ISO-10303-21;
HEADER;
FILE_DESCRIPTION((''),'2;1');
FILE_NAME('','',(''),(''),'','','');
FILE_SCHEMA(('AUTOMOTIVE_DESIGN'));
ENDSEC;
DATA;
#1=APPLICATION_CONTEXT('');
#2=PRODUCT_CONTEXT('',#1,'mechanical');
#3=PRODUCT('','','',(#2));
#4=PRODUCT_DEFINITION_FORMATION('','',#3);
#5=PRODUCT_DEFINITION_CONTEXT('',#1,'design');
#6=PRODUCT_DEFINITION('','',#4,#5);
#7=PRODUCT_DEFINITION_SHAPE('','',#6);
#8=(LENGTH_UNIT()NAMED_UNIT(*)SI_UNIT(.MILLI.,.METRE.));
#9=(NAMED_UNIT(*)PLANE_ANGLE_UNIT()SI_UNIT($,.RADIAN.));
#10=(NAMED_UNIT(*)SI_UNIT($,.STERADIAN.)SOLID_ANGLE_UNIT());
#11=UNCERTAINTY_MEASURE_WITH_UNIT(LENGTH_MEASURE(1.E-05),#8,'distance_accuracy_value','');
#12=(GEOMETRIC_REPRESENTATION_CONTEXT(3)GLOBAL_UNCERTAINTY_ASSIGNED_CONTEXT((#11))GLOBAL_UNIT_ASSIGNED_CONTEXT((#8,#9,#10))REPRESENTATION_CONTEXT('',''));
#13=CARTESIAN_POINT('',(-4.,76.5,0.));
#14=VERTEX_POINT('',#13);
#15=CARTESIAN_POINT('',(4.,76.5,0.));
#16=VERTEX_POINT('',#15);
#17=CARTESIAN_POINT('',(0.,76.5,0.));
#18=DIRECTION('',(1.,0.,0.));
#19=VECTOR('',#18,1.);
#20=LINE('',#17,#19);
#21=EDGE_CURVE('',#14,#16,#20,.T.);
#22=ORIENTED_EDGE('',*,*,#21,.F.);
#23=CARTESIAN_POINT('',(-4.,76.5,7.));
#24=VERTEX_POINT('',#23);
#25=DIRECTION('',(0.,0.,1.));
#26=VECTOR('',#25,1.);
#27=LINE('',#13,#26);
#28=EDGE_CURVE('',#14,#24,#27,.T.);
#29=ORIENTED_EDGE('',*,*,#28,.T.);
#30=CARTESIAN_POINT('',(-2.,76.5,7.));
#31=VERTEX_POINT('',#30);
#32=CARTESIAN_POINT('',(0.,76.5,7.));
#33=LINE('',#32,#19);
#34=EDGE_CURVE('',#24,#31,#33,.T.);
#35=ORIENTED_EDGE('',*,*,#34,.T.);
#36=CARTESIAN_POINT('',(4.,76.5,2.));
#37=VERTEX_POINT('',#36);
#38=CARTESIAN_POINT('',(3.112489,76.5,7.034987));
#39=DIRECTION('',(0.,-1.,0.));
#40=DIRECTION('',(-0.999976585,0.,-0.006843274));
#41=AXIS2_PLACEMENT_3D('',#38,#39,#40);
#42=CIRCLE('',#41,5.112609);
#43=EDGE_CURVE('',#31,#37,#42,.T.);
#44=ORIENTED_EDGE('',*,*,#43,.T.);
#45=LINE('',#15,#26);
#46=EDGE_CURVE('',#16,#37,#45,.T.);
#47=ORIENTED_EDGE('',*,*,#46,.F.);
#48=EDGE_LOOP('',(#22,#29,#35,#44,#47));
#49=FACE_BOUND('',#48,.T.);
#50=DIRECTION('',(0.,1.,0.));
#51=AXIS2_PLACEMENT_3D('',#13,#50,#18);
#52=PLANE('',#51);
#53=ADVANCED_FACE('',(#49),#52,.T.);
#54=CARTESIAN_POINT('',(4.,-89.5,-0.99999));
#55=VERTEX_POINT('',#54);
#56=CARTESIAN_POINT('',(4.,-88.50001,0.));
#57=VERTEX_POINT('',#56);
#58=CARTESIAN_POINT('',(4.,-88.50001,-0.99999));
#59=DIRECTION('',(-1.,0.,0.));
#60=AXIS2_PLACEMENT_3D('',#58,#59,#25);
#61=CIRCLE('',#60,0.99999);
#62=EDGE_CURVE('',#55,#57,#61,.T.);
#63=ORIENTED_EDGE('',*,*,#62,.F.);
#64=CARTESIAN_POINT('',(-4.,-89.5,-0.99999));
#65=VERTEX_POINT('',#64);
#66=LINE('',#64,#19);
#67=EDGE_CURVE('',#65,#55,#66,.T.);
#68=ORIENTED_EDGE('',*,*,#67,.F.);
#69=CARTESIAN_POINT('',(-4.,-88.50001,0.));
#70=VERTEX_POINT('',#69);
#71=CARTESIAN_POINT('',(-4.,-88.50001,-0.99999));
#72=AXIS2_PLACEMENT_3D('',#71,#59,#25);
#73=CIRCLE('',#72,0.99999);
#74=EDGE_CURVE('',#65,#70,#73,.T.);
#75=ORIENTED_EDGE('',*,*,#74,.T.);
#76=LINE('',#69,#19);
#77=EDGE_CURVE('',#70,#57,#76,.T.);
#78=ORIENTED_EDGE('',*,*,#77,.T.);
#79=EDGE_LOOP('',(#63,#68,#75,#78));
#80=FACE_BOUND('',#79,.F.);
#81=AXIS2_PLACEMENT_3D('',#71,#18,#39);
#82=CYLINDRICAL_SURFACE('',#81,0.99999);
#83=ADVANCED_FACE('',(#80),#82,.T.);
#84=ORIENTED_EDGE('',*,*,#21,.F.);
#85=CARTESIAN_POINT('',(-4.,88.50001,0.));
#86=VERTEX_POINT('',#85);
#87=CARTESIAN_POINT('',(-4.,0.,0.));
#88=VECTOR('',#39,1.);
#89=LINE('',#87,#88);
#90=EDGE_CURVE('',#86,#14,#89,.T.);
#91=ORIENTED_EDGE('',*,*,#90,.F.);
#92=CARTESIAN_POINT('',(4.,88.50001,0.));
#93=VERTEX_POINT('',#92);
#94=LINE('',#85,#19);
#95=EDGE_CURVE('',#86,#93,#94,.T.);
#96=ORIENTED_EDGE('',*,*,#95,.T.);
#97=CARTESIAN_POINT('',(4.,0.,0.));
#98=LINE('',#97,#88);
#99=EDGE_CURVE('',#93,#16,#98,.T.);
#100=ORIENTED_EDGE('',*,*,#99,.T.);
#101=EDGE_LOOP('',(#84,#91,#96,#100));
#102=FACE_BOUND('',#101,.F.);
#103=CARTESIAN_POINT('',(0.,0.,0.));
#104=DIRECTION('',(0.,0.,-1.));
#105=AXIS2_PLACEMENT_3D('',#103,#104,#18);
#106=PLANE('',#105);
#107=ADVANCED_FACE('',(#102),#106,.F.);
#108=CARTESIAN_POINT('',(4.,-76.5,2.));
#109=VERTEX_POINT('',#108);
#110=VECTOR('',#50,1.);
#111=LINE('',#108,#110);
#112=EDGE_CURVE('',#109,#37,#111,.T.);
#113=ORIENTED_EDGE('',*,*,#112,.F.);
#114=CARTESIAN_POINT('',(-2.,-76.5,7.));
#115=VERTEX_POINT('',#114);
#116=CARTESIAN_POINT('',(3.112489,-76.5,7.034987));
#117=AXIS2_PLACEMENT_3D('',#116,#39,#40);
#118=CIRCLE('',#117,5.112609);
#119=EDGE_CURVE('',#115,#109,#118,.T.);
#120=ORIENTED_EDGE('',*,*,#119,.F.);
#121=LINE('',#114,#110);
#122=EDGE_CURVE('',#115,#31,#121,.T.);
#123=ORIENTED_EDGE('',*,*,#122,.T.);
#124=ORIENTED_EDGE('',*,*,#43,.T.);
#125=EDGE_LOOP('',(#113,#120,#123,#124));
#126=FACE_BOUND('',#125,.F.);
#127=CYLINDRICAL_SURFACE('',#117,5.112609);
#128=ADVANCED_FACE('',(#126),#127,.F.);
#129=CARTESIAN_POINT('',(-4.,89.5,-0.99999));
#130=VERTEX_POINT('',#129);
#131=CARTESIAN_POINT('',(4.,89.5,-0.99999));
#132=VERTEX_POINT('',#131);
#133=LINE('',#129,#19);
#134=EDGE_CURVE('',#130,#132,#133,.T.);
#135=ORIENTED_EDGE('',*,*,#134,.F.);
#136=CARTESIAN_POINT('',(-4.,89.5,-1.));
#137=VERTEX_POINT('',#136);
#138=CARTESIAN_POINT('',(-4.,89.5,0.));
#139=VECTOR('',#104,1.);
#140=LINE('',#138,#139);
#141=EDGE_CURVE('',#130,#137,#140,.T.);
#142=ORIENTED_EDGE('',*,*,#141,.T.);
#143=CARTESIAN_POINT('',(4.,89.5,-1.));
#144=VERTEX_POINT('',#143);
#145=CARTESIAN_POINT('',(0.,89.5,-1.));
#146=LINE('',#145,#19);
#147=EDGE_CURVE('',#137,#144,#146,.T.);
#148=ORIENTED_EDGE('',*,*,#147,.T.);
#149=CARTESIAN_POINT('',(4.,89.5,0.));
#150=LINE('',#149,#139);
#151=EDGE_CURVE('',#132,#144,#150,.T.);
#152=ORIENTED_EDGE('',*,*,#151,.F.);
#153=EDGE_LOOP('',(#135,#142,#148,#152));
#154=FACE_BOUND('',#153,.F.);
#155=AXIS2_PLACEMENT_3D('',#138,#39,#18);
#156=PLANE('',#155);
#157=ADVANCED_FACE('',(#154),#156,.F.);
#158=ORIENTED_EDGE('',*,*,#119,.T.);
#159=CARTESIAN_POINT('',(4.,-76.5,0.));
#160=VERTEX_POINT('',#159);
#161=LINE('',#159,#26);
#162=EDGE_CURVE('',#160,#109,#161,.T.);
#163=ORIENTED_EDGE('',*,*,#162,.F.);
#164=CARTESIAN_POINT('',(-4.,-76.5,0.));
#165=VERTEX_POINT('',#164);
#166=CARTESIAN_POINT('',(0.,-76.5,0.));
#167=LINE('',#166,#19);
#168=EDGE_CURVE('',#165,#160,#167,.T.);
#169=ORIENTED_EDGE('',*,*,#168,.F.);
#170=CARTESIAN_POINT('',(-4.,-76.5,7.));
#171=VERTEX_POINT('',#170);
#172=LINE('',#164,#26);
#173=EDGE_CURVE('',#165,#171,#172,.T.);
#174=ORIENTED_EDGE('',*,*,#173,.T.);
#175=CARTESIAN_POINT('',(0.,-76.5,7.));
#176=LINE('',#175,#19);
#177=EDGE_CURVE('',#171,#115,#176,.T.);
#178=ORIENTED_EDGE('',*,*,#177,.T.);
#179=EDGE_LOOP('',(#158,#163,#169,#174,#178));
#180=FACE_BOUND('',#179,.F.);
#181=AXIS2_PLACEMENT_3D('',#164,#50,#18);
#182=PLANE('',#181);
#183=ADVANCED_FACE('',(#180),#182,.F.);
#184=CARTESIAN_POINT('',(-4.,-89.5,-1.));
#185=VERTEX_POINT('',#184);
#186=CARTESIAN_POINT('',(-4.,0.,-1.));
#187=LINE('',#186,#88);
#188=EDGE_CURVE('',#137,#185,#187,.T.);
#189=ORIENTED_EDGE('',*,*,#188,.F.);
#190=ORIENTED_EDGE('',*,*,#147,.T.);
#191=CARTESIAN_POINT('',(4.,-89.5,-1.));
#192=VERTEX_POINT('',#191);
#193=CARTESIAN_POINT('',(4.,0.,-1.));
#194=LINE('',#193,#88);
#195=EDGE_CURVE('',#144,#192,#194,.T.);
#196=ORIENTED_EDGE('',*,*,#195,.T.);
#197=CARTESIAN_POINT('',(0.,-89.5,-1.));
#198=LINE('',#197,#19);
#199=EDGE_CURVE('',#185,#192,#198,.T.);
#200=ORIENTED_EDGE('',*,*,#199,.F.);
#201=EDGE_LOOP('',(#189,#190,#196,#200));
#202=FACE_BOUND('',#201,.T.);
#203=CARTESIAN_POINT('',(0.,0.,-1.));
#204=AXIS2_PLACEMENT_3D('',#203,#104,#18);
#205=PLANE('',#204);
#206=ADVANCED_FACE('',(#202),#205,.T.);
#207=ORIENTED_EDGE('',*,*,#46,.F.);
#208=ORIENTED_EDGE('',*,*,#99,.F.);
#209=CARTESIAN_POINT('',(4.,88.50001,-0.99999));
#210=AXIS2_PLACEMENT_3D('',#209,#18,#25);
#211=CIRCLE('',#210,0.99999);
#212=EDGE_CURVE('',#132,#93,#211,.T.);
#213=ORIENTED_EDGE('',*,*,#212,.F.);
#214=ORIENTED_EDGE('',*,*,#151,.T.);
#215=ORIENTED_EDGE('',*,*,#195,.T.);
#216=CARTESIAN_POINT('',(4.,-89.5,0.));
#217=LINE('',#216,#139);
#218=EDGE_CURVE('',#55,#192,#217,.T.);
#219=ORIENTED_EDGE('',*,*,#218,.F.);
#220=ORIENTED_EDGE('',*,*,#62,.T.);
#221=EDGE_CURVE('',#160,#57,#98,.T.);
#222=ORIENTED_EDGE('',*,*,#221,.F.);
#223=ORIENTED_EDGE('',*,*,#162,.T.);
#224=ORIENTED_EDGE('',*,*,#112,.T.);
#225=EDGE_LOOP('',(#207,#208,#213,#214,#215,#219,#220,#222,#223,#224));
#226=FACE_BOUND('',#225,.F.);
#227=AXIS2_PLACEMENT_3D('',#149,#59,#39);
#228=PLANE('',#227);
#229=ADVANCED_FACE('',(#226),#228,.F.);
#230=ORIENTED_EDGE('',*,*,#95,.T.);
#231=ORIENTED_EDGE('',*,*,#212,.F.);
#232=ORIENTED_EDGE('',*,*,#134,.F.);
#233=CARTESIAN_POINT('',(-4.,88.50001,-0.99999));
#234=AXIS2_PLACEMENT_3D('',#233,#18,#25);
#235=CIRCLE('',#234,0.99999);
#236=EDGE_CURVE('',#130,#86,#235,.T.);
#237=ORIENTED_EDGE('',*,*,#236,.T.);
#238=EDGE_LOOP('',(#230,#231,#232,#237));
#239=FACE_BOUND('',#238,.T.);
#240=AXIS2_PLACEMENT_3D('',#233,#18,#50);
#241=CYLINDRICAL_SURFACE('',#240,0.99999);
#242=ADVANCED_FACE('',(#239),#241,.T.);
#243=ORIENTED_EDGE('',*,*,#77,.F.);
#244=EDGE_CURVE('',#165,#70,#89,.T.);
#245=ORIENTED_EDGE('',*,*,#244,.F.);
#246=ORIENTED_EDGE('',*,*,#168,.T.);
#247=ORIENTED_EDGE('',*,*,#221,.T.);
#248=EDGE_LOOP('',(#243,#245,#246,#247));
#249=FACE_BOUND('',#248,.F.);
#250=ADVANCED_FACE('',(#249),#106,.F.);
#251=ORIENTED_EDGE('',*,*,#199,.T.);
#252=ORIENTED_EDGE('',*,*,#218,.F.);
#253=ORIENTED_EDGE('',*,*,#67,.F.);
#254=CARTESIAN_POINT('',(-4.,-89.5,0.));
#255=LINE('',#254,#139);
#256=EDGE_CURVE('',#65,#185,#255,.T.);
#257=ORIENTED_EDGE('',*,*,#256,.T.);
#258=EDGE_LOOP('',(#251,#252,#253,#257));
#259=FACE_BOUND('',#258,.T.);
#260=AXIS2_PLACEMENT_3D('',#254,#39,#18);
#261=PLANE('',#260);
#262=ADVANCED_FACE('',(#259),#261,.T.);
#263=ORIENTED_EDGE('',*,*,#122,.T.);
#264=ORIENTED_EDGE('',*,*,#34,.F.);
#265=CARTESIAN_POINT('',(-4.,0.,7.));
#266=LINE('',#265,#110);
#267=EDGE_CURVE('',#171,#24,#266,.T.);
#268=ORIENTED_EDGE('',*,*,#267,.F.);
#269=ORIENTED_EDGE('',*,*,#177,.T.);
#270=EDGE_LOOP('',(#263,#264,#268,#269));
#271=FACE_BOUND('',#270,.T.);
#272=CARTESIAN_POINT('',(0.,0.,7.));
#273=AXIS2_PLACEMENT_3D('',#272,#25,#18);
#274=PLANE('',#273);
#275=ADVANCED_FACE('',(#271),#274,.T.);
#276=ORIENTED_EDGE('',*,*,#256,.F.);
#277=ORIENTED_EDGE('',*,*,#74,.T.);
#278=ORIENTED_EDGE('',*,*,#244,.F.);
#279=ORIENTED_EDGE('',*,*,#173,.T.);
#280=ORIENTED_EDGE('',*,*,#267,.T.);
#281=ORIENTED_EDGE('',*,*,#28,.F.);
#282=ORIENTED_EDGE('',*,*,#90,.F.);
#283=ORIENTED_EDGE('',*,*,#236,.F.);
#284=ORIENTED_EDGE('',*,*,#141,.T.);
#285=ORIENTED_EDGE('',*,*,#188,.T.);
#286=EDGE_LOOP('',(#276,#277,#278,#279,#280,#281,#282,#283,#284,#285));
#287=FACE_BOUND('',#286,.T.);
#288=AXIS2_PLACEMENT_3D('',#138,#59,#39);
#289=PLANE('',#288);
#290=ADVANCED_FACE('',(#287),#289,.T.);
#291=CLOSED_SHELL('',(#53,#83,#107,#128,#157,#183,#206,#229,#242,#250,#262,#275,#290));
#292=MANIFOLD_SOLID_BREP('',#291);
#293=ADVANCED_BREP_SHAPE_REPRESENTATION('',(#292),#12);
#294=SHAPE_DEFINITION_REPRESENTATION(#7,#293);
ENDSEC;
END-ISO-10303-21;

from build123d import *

# Parameters (mm, degrees)
F0_W     = 8
F0_H     = 153
F1_DEPTH = 7
F3_DEPTH = 160
F4_W     = 8
F4_H     = 179
F5_DEPTH = 1
F6_R     = 0.99999


# Not quite as in the source:
# - a fillet or chamfer is up to 0.001 mm smaller than in the source, because OpenCascade refuses the exact size


with BuildPart() as f1:
    # F0 (on Top) → F1 (new body)
    with BuildSketch(Plane.XY):
        Rectangle(F0_W, F0_H)
    extrude(amount=F1_DEPTH)

    # F2 (on face) → F3 (cut)
    with BuildSketch(Plane.XZ.offset(76.5)):
        with BuildLine():
            Line((4, 7), (-2, 7))
            ThreePointArc((-2, 7), (-0.1605232856, 3.1073720572), (4, 2))
            Line((4, 2), (4, 7))
        make_face()
    extrude(amount=-F3_DEPTH, mode=Mode.SUBTRACT)

    # F4 (on face) → F5 (join)
    with BuildSketch(Plane(origin=(0, 0, 0), x_dir=(1, 0, 0), z_dir=(0, 0, -1))):
        Rectangle(F4_W, F4_H)
    extrude(amount=F5_DEPTH)

    # F6 (radius 1 in the source; OpenCascade refuses exactly that, so slightly less here)
    f6_edges = [f1.edges().sort_by_distance(p)[0] for p in [
        (0, -89.5, 0),
        (0, 89.5, 0),
    ]]
    fillet(f6_edges, radius=F6_R)


solid = f1.part
